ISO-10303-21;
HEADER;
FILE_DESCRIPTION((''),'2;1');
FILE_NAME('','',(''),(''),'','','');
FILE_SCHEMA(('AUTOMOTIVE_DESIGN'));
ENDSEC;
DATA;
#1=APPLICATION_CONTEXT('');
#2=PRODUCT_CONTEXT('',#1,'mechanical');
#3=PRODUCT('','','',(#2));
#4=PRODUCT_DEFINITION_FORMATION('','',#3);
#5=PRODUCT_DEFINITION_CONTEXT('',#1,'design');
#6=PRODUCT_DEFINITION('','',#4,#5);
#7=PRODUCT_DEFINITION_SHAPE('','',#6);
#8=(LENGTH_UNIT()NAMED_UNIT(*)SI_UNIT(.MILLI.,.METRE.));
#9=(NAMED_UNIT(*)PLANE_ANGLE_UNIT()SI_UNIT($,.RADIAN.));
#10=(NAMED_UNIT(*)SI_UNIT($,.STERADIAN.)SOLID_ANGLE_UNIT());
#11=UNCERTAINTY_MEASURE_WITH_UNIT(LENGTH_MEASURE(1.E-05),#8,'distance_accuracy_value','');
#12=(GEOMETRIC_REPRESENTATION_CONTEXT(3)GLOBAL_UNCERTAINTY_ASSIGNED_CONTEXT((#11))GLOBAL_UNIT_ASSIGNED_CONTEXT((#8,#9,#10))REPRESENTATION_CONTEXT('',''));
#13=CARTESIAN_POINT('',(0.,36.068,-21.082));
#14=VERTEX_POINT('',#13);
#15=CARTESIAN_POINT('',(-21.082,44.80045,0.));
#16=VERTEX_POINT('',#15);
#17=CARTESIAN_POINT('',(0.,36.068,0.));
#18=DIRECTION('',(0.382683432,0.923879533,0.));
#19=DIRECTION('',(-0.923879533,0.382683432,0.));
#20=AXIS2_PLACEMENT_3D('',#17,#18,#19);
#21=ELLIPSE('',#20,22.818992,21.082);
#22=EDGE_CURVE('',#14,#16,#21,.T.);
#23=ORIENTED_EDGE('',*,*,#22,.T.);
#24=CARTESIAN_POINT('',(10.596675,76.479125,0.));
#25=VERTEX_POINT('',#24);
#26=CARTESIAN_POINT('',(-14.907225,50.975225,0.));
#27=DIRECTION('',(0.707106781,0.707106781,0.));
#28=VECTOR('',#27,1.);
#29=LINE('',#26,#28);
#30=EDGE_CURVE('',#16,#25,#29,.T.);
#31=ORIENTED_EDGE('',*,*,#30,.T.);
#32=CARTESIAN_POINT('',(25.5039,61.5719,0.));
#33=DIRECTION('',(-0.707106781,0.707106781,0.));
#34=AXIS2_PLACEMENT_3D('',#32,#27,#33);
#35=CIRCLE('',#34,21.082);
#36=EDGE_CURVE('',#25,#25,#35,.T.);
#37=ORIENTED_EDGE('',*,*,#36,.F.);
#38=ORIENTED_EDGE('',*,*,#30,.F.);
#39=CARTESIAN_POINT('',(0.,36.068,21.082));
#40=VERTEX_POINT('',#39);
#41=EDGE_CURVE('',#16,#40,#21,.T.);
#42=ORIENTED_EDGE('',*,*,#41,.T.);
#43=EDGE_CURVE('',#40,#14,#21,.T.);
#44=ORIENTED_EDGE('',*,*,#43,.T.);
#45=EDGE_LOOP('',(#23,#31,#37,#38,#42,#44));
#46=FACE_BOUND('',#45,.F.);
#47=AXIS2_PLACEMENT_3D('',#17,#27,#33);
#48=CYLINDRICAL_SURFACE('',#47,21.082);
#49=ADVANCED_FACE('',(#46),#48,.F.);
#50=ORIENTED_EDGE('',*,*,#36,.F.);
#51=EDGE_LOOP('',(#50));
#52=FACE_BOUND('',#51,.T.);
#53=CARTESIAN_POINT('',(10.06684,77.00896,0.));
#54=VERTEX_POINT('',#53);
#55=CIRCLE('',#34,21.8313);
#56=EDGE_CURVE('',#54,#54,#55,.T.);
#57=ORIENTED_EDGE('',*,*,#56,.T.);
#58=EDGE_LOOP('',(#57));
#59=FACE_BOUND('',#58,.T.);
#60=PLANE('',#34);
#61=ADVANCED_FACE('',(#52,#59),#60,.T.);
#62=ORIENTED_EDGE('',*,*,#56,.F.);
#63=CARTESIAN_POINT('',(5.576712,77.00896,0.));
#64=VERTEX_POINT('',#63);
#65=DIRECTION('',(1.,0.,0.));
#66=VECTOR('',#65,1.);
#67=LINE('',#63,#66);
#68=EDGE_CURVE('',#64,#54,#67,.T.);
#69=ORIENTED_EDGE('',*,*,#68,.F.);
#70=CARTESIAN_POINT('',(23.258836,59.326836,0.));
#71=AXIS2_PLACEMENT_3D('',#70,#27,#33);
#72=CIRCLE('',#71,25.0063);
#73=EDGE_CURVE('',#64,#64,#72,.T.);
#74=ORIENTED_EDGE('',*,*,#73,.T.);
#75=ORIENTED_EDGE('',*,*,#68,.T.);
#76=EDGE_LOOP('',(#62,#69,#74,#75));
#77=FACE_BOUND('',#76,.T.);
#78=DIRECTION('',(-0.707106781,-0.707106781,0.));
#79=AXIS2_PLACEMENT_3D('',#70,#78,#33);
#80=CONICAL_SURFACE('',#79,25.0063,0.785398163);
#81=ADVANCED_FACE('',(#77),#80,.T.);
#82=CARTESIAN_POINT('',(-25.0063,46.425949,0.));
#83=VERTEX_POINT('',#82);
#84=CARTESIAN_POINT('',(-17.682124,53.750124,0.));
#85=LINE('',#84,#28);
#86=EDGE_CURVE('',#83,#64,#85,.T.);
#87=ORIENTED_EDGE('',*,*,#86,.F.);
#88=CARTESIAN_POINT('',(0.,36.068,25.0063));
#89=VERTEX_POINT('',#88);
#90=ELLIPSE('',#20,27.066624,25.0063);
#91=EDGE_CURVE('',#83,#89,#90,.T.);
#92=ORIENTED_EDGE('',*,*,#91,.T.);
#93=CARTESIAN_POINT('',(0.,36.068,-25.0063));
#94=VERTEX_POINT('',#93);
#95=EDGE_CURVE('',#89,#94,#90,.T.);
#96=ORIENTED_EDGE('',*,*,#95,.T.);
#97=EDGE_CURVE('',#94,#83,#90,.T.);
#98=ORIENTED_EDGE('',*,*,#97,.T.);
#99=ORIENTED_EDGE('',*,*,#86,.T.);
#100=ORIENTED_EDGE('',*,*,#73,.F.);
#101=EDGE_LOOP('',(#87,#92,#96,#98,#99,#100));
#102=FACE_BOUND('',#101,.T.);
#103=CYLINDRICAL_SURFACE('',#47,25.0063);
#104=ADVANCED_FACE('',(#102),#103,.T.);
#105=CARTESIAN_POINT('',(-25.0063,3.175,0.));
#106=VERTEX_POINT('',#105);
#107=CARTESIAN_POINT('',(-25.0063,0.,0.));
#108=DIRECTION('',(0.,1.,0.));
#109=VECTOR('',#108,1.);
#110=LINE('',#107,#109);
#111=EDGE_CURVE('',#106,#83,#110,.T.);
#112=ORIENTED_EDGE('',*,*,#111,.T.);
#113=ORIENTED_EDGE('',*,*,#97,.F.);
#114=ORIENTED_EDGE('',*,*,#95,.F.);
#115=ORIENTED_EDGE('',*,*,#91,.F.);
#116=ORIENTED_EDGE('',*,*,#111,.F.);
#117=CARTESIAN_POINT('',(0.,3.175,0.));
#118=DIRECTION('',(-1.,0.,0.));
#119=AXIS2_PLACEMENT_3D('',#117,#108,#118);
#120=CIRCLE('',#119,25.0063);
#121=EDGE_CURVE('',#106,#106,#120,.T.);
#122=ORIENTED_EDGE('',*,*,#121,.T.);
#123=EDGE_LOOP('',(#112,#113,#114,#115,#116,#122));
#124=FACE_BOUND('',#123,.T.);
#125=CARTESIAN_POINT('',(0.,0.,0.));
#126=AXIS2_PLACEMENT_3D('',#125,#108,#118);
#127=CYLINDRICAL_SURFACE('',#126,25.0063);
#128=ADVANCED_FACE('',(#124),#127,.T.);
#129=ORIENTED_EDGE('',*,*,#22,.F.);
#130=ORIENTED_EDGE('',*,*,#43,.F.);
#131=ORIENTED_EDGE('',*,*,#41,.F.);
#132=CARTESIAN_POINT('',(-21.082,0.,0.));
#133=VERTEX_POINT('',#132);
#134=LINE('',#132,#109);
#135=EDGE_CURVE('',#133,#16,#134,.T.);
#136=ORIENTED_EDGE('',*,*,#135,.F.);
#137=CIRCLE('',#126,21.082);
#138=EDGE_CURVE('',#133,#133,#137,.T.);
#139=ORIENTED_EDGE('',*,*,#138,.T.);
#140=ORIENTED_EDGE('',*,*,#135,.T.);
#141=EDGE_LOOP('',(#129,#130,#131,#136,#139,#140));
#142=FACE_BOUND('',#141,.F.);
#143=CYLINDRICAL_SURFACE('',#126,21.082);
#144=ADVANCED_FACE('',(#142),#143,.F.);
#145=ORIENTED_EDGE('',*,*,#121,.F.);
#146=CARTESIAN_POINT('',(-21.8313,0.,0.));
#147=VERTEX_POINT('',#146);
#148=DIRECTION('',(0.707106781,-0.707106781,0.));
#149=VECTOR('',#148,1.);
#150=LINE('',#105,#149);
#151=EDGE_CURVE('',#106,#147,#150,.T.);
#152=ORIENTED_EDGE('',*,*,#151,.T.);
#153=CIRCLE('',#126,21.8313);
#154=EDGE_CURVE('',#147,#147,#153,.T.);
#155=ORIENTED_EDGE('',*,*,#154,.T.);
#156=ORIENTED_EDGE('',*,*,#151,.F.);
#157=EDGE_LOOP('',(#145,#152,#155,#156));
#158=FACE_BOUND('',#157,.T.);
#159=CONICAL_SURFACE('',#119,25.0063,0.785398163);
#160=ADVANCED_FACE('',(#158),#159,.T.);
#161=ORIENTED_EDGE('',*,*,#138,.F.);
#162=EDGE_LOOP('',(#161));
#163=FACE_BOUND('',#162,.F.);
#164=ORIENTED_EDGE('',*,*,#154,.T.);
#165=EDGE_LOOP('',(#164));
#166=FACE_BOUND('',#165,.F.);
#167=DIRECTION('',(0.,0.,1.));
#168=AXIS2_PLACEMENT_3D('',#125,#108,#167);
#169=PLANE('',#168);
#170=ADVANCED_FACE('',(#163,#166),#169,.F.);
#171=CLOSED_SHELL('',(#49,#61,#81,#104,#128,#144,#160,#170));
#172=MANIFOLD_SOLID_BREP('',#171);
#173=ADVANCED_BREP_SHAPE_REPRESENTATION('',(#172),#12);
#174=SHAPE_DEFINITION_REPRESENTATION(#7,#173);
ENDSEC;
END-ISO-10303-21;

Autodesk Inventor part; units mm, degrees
ref_plane "YZ Plane" through (0, 0, 0) normal (1, 0, 0) x (0, 1, 0)
ref_plane "XZ Plane" through (0, 0, 0) normal (0, 1, 0) x (-1, 0, 0)
ref_plane "XY Plane" through (0, 0, 0) normal (0, 0, 1) x (1, 0, 0)
sketch "Sketch1" plane through (0, 0, 0) normal (0, 1, 0) x (-1, 0, 0)
  circle A0 centre (0, 0) radius 25.0063
  circle A1 centre (0, 0) radius 21.082
  dimension "d0" = 50.0126
  dimension "d1" = 42.164
sketch "Sketch2" plane through (0, 0, 0) normal (0, 0, 1) x (1, 0, 0)
  line L0 (0, 0) -> (0, 36.068)
  line L1 (0, 36.068) -> (25.5039, 61.5719)
  line L2 (0, 36.068) -> (0, 32.2314) construction
  line L3 (-35.1083, 0) -> (35.606, 0) construction
  line L4 (25.0063, 0) -> (-25.0063, 0) construction
  dimension "d2" = 45
  dimension "d12" = 25.5039
  dimension "d13" = 36.068
  dimension "d14" = 61.5719
sweep "Sweep1" add profiles "Sketch1" path "Sketch2"
chamfer "Chamfer1" distance 3.175 angle 45 2 edges at (43.1861, 43.8898, 0) (25.0063, 0, 0)
equation "\"d12\" = 0.707107 * d13"
properties part number "Elbow 45degrees 1.25IN D" material "PVC-Piping"
